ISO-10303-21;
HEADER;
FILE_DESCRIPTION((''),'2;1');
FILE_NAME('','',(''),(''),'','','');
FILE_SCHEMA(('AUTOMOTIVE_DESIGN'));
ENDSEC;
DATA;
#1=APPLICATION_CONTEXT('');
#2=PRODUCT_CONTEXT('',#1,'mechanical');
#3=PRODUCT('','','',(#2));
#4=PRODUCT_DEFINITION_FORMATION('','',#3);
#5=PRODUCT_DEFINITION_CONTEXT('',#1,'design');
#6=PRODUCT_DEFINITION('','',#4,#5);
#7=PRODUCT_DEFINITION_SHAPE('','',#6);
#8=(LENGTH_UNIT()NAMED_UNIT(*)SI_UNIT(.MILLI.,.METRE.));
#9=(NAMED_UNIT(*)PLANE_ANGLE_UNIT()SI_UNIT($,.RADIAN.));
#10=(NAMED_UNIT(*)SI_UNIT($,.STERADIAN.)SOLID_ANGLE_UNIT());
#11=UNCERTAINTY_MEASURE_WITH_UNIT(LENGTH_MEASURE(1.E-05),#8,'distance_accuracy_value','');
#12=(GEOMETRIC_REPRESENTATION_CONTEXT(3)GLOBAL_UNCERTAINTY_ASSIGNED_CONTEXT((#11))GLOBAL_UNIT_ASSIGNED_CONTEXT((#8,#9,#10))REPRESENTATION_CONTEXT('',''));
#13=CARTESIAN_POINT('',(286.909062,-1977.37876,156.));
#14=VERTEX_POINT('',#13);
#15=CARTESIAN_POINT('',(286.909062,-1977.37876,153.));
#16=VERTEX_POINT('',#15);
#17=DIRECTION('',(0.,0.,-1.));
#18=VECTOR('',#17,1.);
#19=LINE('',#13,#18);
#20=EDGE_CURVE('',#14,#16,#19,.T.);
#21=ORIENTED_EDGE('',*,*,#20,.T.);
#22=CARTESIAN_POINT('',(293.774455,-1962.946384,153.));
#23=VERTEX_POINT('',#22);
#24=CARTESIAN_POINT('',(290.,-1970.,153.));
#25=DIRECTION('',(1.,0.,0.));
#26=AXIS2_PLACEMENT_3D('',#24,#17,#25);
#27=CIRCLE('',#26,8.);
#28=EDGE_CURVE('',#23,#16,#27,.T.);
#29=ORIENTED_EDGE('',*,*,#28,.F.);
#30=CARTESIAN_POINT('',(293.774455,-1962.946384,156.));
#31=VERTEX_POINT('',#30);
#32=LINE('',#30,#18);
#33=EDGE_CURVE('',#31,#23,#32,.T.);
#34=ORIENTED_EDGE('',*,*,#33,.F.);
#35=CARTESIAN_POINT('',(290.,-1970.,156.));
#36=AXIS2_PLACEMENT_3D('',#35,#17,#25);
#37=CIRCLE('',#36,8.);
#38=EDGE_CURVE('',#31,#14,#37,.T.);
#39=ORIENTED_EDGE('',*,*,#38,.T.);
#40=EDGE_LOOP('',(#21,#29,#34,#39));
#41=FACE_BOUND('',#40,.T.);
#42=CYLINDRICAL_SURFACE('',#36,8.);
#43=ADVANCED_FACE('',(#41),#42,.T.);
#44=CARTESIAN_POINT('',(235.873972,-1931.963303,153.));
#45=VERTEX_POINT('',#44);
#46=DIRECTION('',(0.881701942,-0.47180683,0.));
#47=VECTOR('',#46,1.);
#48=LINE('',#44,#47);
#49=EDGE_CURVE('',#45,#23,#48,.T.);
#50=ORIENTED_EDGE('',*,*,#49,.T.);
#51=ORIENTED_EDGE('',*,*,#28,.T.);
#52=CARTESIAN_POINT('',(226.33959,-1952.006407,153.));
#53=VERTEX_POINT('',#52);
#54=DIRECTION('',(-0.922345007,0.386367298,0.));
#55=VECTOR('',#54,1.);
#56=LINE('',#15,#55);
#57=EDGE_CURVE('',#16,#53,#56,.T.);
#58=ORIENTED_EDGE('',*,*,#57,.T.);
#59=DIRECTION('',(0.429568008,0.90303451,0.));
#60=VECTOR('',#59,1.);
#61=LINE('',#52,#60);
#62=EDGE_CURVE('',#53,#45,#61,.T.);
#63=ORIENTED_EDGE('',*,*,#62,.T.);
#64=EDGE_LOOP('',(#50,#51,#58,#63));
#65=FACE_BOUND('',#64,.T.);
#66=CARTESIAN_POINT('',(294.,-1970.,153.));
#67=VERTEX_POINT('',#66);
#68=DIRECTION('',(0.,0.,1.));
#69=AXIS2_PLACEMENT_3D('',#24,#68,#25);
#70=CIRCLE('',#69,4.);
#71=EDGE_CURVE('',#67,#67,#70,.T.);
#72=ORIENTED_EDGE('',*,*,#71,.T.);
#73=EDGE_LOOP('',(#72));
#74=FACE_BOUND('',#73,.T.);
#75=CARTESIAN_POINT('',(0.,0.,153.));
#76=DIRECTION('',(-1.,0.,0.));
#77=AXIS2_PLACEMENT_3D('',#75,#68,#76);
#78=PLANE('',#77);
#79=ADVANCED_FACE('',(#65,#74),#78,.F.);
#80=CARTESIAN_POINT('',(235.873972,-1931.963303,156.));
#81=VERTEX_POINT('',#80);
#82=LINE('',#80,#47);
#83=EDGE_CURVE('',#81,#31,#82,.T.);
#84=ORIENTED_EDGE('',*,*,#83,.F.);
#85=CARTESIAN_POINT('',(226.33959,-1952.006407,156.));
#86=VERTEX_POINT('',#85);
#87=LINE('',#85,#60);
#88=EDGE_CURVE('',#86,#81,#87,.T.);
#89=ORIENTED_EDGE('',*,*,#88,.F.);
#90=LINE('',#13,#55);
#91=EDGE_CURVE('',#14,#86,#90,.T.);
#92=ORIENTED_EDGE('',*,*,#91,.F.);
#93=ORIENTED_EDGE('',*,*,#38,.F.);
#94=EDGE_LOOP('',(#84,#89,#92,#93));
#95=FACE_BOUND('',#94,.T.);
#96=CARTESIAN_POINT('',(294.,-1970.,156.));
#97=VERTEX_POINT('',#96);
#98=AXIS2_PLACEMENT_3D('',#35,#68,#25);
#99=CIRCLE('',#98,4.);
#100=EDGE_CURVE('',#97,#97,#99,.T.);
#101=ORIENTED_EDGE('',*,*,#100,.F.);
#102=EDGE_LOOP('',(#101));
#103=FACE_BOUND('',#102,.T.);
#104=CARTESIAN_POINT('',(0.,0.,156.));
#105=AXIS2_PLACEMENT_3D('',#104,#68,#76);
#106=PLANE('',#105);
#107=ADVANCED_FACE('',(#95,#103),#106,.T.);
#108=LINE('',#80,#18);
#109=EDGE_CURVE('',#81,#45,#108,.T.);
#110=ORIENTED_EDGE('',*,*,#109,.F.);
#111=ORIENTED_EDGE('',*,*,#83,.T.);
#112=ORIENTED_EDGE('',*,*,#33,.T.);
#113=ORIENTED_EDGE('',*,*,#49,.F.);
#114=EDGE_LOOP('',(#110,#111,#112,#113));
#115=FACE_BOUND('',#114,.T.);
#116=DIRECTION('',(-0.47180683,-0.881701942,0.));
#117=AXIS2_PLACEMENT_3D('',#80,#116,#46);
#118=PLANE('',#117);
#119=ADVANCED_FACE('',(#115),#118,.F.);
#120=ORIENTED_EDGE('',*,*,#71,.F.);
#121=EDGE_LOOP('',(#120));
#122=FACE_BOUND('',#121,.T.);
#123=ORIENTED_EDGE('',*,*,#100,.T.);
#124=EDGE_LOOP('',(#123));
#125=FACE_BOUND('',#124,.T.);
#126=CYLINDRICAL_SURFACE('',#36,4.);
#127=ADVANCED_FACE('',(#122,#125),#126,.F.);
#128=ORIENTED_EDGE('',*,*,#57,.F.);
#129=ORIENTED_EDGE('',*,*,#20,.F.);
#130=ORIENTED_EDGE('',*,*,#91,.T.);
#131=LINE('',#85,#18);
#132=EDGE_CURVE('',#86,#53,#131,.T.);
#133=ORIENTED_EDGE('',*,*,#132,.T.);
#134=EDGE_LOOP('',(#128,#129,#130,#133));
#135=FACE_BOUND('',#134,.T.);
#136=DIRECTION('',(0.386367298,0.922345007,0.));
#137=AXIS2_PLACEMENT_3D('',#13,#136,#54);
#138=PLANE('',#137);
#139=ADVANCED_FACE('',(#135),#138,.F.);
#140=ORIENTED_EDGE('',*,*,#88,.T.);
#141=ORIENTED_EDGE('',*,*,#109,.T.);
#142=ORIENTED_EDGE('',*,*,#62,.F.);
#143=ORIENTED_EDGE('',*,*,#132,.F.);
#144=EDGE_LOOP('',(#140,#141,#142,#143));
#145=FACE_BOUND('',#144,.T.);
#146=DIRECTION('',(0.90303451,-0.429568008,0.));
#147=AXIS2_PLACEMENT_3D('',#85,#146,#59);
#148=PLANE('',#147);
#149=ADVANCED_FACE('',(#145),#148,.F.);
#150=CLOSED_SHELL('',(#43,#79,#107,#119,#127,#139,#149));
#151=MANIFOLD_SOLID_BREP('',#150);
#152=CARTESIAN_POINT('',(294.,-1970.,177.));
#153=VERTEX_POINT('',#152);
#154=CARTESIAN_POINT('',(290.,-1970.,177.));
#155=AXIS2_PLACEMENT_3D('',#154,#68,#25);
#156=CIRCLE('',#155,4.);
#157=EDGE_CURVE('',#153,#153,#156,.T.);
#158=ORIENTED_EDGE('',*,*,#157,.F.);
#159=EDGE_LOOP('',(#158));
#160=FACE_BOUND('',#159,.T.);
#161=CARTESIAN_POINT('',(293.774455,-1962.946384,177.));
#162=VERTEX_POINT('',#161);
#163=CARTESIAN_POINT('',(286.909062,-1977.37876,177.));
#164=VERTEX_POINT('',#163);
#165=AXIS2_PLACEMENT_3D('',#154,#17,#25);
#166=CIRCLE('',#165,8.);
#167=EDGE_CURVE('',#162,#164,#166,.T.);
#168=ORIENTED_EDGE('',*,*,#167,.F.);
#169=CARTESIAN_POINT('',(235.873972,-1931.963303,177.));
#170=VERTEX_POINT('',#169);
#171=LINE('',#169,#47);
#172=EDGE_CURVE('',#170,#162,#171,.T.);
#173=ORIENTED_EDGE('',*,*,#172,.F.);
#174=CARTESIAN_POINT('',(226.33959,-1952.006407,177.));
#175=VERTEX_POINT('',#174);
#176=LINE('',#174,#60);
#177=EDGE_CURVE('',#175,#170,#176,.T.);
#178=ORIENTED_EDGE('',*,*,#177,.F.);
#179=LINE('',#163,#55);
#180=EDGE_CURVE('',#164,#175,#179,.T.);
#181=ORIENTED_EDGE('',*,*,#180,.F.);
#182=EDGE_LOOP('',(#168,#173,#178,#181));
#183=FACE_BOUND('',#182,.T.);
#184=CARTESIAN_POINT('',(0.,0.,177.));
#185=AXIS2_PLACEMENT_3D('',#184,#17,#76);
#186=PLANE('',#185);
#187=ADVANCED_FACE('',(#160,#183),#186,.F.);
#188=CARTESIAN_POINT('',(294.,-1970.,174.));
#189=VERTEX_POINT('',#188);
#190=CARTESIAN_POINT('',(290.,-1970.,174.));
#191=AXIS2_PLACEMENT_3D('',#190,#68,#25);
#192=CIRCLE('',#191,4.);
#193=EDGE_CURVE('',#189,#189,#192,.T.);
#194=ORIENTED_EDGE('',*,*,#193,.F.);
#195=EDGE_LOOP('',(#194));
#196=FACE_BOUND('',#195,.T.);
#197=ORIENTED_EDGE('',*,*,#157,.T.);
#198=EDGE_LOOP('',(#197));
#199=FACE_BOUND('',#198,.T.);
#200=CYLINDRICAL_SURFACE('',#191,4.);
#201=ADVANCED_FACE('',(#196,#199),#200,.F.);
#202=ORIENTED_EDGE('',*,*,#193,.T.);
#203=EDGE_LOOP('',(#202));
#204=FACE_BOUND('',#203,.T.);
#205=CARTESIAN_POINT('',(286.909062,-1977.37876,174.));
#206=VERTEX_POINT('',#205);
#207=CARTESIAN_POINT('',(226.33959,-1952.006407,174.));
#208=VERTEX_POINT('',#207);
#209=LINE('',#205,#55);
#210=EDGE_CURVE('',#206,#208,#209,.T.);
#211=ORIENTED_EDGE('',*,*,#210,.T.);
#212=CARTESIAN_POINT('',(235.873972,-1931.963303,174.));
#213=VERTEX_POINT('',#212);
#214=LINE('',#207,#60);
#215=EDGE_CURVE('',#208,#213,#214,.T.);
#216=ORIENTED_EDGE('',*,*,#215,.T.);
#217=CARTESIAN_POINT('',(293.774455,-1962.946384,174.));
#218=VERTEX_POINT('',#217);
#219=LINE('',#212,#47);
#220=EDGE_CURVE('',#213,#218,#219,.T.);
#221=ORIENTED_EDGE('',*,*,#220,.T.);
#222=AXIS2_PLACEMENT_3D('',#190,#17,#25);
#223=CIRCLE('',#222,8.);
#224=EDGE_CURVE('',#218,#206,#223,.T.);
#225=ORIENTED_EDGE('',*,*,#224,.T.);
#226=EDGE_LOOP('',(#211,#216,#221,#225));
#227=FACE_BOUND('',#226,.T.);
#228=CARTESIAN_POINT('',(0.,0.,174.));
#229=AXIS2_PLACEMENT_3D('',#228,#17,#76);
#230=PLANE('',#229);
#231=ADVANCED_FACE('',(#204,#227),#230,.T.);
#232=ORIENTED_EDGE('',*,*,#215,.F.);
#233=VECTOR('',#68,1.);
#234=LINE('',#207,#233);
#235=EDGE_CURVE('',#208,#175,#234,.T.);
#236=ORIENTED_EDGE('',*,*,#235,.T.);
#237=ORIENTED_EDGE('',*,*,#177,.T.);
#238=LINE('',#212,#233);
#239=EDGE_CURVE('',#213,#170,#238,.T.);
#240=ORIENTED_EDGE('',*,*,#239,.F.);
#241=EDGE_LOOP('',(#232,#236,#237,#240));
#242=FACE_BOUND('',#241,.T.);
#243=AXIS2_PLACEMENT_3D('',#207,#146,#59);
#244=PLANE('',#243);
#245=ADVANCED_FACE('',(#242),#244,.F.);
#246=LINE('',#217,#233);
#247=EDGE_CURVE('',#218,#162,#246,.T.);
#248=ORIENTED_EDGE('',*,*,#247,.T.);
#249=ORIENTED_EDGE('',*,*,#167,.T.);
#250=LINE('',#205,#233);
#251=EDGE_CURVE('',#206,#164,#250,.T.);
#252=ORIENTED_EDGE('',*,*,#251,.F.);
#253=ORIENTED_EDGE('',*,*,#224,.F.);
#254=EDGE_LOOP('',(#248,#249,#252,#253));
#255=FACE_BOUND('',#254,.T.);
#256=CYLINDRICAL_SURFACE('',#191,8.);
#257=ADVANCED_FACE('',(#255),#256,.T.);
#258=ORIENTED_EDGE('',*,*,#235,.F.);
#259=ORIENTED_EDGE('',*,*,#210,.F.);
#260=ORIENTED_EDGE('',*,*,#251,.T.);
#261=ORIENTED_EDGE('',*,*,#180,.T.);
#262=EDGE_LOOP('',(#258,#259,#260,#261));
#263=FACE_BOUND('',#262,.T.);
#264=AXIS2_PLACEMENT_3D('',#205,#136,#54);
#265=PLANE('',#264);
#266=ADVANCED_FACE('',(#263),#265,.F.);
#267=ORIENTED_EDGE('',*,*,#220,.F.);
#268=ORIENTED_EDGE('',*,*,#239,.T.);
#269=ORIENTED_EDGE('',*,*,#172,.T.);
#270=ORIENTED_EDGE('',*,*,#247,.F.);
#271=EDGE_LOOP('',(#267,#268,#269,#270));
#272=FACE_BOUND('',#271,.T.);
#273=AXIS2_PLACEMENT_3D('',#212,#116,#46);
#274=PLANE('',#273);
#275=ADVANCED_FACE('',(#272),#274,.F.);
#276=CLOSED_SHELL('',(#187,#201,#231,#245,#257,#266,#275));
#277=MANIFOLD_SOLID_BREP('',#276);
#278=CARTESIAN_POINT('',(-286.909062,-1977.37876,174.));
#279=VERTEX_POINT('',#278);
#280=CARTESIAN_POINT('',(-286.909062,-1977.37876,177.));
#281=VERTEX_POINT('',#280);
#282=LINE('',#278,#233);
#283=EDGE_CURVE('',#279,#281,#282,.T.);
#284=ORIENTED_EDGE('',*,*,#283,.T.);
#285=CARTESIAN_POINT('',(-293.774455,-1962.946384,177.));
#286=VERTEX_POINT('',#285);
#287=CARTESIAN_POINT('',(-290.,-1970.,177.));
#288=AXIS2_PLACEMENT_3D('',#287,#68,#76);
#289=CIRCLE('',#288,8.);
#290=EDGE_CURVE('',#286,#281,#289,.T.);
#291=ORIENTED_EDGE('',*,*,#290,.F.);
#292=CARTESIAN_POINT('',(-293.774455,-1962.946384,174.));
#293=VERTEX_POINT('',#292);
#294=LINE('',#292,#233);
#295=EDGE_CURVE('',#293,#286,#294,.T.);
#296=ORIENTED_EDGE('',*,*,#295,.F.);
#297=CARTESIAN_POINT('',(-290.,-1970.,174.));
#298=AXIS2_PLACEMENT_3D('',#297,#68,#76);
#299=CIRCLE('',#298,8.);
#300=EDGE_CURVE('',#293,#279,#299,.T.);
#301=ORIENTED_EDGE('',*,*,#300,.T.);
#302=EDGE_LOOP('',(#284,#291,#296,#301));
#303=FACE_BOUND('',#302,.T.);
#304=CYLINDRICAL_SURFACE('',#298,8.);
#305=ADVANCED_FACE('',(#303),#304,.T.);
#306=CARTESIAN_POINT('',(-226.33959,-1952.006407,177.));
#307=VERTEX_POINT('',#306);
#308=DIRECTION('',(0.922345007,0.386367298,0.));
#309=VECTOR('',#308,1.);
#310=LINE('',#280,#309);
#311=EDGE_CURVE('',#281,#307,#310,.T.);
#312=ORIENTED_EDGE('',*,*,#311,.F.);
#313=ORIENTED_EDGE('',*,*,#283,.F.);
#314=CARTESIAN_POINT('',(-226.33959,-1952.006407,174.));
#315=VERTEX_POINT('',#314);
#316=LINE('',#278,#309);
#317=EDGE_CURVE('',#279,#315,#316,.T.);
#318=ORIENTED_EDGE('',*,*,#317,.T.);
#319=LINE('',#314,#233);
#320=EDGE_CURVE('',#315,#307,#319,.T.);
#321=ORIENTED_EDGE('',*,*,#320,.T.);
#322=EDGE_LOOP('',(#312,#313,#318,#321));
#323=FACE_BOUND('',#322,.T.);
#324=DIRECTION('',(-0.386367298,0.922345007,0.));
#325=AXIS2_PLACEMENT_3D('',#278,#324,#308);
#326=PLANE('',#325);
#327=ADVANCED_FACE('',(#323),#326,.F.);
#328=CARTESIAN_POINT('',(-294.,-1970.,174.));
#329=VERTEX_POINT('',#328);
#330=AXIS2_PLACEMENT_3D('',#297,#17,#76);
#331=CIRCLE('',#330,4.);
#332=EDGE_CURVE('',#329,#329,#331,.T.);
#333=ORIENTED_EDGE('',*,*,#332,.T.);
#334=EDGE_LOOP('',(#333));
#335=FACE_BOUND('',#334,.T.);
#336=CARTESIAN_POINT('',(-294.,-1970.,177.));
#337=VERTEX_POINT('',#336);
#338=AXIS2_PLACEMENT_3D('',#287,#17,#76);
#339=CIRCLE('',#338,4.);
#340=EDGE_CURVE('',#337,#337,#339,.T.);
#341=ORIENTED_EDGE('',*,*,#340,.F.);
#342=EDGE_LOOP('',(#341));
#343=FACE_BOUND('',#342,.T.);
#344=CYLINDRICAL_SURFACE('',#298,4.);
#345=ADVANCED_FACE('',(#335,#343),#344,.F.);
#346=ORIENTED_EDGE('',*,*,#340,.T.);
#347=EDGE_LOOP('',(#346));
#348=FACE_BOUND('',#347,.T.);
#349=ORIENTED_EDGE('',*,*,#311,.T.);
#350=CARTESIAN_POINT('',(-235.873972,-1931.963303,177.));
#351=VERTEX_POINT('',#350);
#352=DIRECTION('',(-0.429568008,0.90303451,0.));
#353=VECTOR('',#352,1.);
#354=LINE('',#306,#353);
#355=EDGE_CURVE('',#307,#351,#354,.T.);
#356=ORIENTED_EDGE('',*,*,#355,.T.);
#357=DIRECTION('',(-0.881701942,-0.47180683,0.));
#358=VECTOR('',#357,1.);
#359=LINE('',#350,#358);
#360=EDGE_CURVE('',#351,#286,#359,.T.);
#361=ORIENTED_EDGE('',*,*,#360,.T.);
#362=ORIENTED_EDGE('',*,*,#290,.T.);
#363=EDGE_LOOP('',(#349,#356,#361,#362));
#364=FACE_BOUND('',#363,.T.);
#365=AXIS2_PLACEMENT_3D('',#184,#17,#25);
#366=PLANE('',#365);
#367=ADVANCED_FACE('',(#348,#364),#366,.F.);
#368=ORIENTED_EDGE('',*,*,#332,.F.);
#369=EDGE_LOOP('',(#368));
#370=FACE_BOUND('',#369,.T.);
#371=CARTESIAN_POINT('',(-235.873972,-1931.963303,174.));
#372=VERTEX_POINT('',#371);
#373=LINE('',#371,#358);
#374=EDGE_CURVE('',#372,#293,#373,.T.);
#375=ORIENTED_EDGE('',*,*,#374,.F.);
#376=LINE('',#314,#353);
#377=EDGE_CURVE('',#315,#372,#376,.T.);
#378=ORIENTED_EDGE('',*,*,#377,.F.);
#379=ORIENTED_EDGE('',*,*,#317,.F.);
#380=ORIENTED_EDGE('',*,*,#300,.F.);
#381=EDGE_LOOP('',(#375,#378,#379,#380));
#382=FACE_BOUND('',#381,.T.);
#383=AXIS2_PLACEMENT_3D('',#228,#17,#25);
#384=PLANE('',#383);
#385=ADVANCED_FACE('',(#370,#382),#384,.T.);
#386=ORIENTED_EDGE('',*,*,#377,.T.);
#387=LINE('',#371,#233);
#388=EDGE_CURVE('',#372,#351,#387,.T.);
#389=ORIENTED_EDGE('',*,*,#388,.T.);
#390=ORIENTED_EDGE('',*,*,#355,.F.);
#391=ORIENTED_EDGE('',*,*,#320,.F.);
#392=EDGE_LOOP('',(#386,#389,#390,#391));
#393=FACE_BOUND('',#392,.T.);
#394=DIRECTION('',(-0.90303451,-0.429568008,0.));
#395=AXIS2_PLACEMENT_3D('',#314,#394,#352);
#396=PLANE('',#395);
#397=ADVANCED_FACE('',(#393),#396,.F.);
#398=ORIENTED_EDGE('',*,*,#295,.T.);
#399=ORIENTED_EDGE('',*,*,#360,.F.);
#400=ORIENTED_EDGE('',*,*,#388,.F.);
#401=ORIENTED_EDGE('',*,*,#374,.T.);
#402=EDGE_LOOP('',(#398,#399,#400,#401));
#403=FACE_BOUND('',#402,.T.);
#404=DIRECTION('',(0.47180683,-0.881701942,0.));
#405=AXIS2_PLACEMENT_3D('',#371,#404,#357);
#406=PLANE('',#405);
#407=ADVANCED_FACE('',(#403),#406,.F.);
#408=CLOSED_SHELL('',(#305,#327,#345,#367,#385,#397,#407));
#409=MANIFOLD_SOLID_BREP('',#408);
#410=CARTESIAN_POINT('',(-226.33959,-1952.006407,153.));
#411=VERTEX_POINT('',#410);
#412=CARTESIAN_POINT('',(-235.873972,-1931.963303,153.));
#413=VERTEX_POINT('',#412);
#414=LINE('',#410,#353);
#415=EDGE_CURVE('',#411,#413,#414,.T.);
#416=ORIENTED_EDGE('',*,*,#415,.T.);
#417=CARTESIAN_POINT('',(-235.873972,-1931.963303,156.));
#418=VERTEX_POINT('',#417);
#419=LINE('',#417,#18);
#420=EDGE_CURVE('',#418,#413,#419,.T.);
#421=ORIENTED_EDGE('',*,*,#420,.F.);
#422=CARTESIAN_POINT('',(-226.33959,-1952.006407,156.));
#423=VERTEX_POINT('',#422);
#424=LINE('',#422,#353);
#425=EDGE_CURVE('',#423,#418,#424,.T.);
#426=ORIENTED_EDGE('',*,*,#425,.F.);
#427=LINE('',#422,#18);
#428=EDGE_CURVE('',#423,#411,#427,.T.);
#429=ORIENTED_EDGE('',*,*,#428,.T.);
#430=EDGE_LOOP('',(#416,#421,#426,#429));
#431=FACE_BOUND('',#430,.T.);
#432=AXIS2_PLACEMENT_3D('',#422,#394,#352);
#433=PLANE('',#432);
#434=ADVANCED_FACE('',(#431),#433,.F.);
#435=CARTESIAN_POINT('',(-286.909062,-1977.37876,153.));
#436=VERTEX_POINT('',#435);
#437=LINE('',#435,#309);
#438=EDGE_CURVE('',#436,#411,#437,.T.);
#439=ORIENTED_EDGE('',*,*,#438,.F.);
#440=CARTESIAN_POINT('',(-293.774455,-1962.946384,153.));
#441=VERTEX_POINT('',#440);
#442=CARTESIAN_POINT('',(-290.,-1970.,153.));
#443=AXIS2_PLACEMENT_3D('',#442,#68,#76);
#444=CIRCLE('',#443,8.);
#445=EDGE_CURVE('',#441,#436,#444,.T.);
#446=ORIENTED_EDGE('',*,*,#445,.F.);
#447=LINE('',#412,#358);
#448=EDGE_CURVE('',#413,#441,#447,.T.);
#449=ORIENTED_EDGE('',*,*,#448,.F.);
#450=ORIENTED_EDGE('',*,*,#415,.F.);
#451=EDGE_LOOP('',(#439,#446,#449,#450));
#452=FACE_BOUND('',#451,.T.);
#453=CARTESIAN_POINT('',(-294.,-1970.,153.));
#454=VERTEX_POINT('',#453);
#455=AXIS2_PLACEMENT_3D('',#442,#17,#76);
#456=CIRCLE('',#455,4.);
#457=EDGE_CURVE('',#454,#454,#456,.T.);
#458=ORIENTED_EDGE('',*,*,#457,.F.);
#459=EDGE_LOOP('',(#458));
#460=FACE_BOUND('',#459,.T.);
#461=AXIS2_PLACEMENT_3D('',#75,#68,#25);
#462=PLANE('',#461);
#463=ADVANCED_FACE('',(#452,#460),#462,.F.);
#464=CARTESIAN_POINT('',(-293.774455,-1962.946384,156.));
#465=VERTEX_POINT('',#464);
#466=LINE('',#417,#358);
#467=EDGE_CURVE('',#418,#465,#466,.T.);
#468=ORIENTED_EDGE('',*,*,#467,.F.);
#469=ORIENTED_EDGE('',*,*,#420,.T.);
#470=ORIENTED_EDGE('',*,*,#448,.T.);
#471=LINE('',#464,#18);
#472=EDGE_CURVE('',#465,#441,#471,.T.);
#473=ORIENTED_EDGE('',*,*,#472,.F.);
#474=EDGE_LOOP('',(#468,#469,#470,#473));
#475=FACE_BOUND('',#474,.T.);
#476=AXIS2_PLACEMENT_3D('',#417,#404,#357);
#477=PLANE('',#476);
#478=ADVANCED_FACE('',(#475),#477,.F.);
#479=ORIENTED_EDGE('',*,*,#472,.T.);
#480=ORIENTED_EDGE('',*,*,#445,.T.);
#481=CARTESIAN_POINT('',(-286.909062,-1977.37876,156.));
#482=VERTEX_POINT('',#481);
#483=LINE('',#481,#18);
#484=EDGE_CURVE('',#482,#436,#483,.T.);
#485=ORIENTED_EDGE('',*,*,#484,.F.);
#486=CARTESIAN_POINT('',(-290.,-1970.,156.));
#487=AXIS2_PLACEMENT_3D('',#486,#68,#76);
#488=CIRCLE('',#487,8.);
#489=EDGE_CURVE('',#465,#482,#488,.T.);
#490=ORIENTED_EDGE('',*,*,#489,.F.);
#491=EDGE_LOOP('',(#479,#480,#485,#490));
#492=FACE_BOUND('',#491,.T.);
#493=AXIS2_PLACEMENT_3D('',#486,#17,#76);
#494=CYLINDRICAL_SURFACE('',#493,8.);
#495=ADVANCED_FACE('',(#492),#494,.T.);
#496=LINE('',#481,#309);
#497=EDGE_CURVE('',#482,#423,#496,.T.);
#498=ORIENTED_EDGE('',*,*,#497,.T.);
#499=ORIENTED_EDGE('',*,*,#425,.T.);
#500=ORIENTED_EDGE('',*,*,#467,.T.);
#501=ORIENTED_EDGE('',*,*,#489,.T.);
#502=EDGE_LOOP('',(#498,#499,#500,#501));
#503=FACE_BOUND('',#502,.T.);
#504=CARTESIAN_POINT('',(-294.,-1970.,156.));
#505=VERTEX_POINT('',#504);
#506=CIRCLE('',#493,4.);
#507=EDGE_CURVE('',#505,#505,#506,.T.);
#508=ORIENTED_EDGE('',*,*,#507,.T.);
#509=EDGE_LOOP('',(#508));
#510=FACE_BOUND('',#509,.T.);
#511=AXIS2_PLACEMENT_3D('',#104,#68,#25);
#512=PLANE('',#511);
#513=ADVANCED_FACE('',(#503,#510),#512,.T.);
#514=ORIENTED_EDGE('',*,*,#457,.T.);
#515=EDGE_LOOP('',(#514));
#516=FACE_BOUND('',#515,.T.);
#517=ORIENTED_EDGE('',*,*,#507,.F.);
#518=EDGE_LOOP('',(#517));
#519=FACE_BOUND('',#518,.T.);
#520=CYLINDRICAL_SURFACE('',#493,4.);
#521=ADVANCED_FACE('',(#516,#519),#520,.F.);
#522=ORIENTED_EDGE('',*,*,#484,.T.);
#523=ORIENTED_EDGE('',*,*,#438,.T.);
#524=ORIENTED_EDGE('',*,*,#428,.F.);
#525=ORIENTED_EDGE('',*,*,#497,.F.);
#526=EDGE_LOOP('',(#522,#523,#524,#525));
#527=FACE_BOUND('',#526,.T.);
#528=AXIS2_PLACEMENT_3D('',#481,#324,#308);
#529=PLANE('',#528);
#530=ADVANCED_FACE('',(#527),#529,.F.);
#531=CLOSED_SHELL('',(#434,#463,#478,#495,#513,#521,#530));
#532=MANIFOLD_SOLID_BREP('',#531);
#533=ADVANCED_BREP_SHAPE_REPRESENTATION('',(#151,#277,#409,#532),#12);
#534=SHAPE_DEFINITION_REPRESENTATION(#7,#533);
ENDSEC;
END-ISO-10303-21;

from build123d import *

# Parameters (mm, degrees)
BOSS_EXTRUDE1_START     = 174
BOSS_EXTRUDE1_OUTLINE_R = 4
BOSS_EXTRUDE1_DEPTH     = 3


# Read off the part's stored shape, not the designer's step: Boss-Extrude1
with BuildPart() as part:
    # Boss-Extrude1 outline → Boss-Extrude1 (new body)
    with BuildSketch(Plane.XY.offset(BOSS_EXTRUDE1_START)):
        with BuildLine():
            Line((235.873972271, -1931.963303044), (226.339589967, -1952.006407041))
            Line((226.339589967, -1952.006407041), (286.909061616, -1977.378760052))
            ThreePointArc((286.909061616, -1977.378760052), (297.224276082, -1973.436544062), (293.774454643, -1962.946384462))
            Line((293.774454643, -1962.946384462), (235.873972271, -1931.963303044))
        make_face()
        with Locations((290, -1970)):
            Circle(BOSS_EXTRUDE1_OUTLINE_R, mode=Mode.SUBTRACT)
    extrude(amount=BOSS_EXTRUDE1_DEPTH)


with BuildPart() as body_2:
    # Mirror1: mirrored copy
    add(part.part.mirror(Plane.XY.offset(165)))


with BuildPart() as body_3:
    # Mirror2: mirrored copy
    add(part.part.mirror(Plane(origin=(0, 0, 0), x_dir=(0, 0, 1), z_dir=(1, 0, 0))))


with BuildPart() as body_4:
    # Mirror2 2: mirrored copy
    add(body_2.part.mirror(Plane(origin=(0, 0, 0), x_dir=(0, 0, 1), z_dir=(1, 0, 0))))


solid = Compound([part.part, body_2.part, body_3.part, body_4.part])
